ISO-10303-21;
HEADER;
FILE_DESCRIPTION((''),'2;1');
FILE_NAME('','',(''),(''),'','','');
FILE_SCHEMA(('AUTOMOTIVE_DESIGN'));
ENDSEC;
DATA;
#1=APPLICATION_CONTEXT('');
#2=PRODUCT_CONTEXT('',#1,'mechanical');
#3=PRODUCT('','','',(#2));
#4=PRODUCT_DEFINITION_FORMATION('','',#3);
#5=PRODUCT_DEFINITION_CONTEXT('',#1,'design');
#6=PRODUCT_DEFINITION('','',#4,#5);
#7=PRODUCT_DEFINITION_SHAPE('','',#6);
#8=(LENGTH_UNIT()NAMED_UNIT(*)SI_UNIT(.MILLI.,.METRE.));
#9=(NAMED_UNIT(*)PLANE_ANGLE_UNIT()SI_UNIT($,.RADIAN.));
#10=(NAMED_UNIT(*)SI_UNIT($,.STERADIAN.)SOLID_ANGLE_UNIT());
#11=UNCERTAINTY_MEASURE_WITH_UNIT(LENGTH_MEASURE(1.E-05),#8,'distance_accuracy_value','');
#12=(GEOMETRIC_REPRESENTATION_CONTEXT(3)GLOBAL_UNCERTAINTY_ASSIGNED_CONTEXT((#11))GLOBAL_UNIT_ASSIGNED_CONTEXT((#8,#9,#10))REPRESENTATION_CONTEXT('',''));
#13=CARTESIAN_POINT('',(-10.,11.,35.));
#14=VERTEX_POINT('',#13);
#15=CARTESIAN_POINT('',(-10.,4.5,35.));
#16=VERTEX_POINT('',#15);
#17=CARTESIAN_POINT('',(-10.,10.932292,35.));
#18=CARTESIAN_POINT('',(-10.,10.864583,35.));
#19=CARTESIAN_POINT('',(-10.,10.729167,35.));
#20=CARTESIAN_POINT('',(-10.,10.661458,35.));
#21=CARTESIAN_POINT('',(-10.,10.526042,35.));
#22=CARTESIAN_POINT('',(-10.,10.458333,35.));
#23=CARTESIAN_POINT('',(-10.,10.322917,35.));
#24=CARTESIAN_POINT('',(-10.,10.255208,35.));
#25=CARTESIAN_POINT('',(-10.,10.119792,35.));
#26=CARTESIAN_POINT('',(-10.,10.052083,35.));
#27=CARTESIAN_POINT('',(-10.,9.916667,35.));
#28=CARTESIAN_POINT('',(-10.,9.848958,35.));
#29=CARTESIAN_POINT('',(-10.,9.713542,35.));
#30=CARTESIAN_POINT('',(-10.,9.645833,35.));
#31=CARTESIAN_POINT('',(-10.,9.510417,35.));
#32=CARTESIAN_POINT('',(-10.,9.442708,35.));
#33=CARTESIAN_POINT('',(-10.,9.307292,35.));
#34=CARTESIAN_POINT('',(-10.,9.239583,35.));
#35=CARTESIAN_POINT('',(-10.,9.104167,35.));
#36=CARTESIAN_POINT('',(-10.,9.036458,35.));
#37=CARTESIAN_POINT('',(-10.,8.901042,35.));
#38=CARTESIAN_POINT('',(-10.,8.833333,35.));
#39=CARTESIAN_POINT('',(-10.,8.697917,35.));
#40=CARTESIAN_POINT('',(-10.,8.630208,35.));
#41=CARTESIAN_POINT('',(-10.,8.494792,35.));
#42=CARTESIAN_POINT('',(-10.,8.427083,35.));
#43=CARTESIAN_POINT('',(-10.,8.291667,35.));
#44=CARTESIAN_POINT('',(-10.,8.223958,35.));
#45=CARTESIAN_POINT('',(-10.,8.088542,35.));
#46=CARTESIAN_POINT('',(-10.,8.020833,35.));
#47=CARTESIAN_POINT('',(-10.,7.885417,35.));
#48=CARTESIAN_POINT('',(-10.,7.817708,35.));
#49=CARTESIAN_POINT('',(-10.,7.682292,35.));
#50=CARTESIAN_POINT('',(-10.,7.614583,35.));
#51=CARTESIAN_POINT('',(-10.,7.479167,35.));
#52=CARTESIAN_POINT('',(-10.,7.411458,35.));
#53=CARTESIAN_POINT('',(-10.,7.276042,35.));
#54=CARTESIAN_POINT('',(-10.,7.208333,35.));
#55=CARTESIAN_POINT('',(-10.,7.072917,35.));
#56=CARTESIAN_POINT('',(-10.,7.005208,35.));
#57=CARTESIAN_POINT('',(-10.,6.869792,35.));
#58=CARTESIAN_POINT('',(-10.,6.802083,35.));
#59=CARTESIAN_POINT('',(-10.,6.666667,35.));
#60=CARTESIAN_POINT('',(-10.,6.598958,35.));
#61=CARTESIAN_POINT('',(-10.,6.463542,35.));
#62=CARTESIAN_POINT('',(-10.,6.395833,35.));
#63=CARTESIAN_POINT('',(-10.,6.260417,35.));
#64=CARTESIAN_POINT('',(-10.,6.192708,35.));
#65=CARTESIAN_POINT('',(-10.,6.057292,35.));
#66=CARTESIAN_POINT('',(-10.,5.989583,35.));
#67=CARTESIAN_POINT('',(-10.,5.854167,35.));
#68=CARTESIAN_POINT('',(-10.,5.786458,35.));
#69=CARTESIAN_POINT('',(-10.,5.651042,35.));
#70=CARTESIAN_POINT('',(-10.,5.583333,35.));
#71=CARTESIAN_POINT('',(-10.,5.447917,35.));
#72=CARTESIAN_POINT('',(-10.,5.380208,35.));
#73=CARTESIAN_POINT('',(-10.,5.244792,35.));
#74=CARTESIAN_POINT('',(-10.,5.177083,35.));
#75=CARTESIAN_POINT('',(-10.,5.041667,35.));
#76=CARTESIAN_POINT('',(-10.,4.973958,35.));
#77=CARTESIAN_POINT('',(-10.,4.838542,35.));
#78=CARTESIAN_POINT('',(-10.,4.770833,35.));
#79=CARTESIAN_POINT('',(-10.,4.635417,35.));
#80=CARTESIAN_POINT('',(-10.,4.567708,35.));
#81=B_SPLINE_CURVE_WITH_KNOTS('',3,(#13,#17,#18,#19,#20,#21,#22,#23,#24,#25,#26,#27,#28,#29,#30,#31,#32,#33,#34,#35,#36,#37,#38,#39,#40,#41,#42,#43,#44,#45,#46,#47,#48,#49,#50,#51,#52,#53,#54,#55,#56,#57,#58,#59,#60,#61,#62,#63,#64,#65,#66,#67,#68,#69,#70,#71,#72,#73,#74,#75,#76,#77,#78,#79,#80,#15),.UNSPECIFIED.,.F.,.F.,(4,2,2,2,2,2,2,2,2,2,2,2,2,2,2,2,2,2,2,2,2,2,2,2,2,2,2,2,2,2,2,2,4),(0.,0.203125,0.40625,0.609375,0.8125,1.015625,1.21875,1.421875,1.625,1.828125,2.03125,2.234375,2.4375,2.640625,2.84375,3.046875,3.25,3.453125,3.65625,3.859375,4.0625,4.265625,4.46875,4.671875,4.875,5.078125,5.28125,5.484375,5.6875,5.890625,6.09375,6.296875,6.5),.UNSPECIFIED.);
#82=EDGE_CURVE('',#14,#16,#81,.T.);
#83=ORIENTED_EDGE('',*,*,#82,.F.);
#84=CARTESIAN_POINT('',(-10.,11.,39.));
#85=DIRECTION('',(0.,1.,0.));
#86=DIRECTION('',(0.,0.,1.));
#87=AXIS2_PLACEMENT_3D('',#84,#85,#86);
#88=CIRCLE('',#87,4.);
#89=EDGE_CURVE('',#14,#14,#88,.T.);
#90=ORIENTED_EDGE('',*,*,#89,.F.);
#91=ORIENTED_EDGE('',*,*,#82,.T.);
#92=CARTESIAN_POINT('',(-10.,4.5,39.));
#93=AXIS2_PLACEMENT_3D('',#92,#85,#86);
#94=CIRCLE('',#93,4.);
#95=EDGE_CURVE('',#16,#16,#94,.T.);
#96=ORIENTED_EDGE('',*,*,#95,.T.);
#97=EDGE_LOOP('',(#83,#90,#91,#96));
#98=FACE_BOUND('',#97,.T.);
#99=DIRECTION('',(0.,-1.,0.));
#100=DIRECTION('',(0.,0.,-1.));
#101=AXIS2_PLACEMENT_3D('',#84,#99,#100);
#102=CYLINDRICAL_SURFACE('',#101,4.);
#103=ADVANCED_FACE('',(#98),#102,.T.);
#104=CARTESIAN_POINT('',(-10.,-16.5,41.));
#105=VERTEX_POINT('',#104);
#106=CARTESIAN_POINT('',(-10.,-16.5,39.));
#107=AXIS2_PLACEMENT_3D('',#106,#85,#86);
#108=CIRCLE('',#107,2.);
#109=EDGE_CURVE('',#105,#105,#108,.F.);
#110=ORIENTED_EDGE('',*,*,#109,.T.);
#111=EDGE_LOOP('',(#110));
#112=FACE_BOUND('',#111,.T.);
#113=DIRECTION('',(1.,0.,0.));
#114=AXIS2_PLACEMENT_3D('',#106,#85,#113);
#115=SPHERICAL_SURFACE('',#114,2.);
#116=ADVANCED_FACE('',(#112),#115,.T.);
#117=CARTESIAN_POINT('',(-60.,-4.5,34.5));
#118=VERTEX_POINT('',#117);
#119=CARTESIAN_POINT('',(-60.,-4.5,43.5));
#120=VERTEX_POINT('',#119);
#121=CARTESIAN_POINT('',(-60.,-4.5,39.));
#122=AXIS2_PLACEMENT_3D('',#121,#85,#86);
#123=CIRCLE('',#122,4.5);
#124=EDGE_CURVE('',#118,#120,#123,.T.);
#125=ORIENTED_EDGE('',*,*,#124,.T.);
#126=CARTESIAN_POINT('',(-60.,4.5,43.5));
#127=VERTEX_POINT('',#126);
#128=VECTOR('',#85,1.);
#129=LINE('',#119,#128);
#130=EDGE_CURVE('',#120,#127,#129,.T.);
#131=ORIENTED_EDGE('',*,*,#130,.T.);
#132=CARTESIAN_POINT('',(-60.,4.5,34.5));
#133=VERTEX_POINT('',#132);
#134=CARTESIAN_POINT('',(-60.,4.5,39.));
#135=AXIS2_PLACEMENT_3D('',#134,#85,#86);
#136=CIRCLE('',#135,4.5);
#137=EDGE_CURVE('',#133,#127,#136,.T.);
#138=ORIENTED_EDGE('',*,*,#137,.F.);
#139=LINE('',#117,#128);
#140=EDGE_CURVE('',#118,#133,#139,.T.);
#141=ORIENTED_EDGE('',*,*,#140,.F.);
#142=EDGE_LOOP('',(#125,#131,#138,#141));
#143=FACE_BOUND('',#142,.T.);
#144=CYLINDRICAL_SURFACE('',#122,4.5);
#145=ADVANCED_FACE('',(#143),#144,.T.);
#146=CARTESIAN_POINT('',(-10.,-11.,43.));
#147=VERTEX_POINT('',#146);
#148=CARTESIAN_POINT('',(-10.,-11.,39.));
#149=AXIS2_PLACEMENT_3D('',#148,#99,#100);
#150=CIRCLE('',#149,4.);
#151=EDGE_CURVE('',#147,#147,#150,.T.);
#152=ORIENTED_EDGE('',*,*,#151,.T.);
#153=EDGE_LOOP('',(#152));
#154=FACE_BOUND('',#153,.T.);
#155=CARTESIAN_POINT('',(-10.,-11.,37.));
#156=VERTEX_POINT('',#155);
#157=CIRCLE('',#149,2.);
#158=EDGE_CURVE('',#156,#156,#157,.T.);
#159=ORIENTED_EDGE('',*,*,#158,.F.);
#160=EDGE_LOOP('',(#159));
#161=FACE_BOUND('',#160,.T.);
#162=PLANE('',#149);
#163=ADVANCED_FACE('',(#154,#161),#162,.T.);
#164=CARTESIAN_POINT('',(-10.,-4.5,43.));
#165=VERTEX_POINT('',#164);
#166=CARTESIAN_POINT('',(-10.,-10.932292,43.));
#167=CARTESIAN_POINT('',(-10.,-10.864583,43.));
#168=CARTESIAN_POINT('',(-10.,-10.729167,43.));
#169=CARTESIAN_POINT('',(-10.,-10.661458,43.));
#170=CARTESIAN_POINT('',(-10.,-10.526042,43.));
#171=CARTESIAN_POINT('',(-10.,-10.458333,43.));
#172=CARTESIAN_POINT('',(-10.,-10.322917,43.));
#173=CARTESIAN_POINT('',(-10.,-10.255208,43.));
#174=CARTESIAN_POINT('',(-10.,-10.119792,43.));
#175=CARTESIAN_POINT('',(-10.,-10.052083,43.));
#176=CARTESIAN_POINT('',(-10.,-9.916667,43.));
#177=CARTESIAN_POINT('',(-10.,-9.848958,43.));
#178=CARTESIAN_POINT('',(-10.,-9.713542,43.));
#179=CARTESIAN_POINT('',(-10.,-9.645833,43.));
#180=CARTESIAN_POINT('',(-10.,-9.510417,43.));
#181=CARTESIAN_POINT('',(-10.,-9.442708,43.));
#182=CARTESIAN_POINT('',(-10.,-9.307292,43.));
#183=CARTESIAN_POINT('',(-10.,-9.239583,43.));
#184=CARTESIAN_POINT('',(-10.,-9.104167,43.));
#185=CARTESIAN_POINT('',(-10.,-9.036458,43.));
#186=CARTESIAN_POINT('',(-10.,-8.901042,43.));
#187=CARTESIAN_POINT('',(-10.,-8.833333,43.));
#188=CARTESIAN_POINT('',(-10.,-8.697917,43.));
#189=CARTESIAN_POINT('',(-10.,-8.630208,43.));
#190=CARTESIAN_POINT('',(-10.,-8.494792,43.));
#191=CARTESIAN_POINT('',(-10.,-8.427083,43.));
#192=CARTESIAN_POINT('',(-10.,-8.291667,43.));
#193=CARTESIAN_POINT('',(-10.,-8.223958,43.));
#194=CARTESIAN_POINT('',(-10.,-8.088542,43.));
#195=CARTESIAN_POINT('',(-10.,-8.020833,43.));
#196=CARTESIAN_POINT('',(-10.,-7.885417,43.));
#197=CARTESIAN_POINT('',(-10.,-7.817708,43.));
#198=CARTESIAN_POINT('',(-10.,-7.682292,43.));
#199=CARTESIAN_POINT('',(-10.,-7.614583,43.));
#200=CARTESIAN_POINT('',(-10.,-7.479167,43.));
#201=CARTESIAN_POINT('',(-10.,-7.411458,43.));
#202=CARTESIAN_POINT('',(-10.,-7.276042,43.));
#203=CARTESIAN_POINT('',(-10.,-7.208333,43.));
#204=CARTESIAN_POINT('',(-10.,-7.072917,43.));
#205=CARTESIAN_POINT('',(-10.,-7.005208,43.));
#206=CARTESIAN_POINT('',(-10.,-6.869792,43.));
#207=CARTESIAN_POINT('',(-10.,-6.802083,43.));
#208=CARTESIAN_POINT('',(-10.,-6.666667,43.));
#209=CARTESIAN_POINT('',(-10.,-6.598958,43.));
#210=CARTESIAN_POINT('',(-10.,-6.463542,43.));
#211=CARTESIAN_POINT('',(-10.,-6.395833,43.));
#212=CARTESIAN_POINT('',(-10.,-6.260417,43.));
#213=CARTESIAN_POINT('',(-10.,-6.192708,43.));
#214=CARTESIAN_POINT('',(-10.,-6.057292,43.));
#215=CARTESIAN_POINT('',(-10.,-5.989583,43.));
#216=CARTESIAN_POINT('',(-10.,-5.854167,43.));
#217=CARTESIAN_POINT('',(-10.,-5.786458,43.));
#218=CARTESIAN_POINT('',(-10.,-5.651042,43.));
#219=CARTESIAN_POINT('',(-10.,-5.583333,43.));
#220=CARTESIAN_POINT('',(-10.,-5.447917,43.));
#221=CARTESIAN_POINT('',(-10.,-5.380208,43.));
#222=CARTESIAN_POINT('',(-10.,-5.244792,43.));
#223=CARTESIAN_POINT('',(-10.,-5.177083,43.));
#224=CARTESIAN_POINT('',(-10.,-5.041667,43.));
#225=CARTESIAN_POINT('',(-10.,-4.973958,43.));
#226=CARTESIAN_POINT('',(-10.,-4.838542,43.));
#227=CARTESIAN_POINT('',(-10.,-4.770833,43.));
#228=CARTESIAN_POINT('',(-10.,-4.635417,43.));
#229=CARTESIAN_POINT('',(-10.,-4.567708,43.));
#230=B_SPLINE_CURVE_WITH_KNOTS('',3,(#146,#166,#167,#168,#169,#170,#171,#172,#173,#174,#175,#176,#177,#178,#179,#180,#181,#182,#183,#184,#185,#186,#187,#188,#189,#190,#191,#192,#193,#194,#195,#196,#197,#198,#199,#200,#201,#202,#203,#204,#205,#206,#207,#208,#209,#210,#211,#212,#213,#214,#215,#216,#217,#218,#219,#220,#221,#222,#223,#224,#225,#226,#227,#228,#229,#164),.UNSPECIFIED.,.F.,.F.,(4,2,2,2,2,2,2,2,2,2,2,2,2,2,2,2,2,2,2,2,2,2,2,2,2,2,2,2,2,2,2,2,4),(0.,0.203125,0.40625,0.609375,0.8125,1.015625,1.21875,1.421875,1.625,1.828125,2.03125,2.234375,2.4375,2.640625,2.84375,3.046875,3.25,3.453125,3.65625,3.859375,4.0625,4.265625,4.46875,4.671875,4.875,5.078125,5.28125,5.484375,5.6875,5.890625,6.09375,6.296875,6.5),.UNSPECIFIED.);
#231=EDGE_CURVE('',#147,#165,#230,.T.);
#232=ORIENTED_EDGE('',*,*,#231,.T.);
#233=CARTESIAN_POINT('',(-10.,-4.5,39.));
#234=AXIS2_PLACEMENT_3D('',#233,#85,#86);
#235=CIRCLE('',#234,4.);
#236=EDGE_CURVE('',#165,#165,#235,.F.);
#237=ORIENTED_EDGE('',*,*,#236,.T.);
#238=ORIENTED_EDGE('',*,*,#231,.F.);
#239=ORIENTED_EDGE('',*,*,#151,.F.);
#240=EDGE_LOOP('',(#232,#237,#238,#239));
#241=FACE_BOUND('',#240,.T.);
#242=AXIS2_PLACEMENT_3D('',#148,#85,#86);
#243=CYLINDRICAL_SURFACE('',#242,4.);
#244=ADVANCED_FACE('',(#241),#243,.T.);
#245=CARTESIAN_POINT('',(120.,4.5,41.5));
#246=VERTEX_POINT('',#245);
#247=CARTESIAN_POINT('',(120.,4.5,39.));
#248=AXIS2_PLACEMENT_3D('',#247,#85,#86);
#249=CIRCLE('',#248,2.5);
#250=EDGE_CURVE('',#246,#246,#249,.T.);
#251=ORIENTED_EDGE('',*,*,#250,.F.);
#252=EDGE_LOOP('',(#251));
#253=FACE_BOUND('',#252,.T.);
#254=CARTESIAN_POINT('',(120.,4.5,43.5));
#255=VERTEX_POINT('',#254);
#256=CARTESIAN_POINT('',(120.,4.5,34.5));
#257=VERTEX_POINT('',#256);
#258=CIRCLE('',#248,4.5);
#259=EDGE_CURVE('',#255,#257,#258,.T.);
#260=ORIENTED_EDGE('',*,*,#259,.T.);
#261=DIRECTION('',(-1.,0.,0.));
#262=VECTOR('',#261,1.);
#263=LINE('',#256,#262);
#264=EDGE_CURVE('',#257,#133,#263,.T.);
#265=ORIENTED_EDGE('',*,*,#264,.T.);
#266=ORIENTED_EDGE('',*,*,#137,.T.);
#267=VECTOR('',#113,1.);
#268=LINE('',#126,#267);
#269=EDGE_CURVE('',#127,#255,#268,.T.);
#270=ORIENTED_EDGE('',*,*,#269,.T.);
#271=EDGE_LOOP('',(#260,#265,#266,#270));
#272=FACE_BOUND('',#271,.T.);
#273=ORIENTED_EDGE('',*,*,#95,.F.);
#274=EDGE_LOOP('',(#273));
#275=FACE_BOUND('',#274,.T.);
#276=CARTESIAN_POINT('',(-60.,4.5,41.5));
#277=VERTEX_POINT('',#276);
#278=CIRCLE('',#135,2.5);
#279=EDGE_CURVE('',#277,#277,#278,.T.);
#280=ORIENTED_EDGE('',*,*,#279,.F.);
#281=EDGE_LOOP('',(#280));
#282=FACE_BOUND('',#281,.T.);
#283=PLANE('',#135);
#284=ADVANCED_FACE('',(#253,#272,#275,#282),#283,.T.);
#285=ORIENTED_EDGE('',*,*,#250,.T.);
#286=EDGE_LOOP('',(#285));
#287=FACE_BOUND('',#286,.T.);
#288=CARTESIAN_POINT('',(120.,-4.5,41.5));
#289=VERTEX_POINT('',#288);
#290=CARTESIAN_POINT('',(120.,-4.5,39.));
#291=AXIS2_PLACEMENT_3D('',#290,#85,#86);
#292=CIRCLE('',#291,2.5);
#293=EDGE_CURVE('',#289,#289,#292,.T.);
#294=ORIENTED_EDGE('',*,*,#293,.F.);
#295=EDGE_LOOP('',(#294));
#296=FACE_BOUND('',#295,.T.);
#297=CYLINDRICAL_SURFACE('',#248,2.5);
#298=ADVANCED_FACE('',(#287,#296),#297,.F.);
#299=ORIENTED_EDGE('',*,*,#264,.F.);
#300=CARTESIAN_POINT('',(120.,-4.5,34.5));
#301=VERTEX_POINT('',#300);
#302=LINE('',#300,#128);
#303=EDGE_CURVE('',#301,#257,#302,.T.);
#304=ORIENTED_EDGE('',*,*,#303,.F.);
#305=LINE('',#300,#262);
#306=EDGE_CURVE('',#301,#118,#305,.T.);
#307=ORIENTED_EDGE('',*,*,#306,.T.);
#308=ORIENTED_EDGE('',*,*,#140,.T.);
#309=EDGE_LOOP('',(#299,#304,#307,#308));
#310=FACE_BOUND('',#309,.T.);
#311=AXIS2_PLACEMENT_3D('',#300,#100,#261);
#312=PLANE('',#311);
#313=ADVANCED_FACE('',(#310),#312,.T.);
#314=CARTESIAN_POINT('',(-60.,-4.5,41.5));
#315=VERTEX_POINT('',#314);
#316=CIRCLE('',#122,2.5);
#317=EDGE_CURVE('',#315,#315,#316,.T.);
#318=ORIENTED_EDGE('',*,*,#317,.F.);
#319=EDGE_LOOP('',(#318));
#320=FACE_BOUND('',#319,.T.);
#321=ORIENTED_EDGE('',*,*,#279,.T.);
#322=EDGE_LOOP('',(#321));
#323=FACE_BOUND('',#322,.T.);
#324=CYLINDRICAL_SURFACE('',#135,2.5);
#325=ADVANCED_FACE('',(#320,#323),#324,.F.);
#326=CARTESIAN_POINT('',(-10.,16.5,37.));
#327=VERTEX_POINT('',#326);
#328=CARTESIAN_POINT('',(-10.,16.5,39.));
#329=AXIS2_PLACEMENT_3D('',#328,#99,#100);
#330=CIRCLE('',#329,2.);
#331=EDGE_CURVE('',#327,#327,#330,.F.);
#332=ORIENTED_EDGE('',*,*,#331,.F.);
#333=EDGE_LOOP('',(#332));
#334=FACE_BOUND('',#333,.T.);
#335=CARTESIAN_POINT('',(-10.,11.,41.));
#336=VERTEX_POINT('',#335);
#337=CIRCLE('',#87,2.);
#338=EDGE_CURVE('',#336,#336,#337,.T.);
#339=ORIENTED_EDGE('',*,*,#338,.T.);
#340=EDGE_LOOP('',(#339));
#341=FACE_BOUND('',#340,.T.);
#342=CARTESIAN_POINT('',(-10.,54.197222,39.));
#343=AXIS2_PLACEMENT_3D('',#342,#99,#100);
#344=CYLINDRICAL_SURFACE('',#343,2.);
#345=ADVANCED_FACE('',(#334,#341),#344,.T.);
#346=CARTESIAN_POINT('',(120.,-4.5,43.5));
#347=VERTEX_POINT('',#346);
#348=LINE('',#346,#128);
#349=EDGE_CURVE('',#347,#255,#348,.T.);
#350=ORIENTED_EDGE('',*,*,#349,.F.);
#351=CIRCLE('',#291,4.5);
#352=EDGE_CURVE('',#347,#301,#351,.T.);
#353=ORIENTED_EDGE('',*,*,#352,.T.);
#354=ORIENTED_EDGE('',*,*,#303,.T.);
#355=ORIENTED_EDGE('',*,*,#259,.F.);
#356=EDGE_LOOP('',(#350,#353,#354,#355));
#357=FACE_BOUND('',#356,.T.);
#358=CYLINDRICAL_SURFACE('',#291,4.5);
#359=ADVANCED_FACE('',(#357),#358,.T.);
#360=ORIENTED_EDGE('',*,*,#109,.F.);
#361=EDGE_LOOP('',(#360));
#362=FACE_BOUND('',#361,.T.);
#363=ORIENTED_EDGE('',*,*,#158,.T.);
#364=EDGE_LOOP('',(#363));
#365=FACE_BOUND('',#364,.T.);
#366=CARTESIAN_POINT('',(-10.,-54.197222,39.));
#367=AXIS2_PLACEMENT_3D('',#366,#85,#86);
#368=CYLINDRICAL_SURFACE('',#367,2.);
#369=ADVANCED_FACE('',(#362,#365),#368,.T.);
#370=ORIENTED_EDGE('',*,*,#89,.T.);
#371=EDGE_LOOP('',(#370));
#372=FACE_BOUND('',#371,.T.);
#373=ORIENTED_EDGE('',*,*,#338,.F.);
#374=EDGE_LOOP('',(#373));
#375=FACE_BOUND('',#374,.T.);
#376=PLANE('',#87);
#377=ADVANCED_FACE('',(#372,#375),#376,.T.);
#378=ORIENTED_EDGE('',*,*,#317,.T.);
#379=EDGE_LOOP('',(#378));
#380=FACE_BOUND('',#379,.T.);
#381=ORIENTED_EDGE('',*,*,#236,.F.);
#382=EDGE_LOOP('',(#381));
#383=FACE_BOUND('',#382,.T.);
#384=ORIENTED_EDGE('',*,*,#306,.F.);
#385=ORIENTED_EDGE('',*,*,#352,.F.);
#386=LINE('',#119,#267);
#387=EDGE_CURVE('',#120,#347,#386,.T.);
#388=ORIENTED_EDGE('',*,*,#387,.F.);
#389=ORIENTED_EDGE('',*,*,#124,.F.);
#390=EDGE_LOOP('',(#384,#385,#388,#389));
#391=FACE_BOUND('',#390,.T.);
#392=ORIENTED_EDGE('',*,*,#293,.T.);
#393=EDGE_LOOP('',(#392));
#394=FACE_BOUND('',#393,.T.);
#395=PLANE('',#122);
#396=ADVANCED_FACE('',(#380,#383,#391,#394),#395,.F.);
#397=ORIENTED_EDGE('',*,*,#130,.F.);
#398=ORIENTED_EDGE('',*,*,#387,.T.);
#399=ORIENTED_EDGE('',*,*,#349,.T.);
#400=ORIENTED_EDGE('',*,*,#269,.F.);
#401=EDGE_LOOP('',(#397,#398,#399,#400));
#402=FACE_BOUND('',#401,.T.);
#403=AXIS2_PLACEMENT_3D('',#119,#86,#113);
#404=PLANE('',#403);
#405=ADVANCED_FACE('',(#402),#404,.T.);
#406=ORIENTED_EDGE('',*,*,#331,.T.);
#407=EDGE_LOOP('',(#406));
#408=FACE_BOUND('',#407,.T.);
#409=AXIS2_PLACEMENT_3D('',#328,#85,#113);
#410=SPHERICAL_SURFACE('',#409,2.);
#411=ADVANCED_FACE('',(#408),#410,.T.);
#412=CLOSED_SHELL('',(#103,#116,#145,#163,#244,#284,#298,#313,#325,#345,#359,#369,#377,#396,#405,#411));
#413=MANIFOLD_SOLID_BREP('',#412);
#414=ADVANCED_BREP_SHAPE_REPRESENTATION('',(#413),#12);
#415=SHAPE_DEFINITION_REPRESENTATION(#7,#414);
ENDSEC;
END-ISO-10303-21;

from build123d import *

# Parameters (mm, degrees)
BOSS_EXTRUDE1_DEPTH          = 9
SKETCH2_R                    = 4
BOSS_EXTRUDE2_DEPTH          = 6.5
BOSS_EXTRUDE4_START          = 6.5
SKETCH4_R                    = 4
BOSS_EXTRUDE4_DEPTH          = 6.5
F_5_0_5_DIAMETER_HOLE1_D     = 5
F_5_0_5_DIAMETER_HOLE1_DEPTH = 23


# Read off the part's stored shape, not the designer's step: Boss-Extrude3, Boss-Extrude5
with BuildPart() as part:
    # Sketch1 → Boss-Extrude1 (new body)
    with BuildSketch(Plane(origin=(0, 4.5, 0), x_dir=(1, 0, 0), z_dir=(0, 1, 0))):
        with BuildLine():
            Line((-60, -43.5), (120, -43.5))
            ThreePointArc((120, -43.5), (124.5, -39), (120, -34.5))
            Line((120, -34.5), (-60, -34.5))
            ThreePointArc((-60, -34.5), (-64.5, -39), (-60, -43.5))
        make_face()
    extrude(amount=-BOSS_EXTRUDE1_DEPTH)

    # Sketch2 → Boss-Extrude2 (add)
    with BuildSketch(Plane.XZ.offset(4.5)):
        with Locations(Location((-10, 39, 0), (0, 0, 90))):
            Circle(SKETCH2_R)
    extrude(amount=BOSS_EXTRUDE2_DEPTH)

    # Boss-Extrude3 outline → Boss-Extrude3 (revolve)
    with BuildSketch(Plane(origin=(-10, 0, 39), x_dir=(1, 0, 0), z_dir=(0, 0, 1))):
        with BuildLine():
            ThreePointArc((0, -18.5), (1.414213563, -17.914213562), (2, -16.499999998))
            Line((2, -16.499999998), (2, -11))
            Line((2, -11), (0, -11))
            Line((0, -11), (0, -18.5))
        make_face()
    revolve(axis=Axis((-10, 0, 39), (0, 1, 0)))

    # Sketch4 → Boss-Extrude4 (add)
    with BuildSketch(Plane(origin=(0, 4.5, 0), x_dir=(-1, 0, 0), z_dir=(0, 1, 0)).offset(BOSS_EXTRUDE4_START)):
        with Locations(Location((10, 39, 0), (0, 0, 90))):
            Circle(SKETCH4_R)
    extrude(amount=-BOSS_EXTRUDE4_DEPTH)

    # Boss-Extrude5 outline → Boss-Extrude5 (revolve)
    with BuildSketch(Plane(origin=(-10, 0, 39), x_dir=(1, 0, 0), z_dir=(0, 0, 1))):
        with BuildLine():
            Line((2, 11), (2, 16.499999998))
            ThreePointArc((2, 16.499999998), (1.414213563, 17.914213562), (0, 18.5))
            Line((0, 18.5), (0, 11))
            Line((0, 11), (2, 11))
        make_face()
    revolve(axis=Axis((-10, 0, 39), (0, 1, 0)))

    # Ø5.0 (5) Diameter Hole1
    with Locations(Plane(origin=(0, 4.5, 0), x_dir=(1, 0, 0), z_dir=(0, 1, 0))):
        with Locations((-60, -39), (120, -39)):
            Hole(F_5_0_5_DIAMETER_HOLE1_D / 2, depth=F_5_0_5_DIAMETER_HOLE1_DEPTH)


solid = part.part
